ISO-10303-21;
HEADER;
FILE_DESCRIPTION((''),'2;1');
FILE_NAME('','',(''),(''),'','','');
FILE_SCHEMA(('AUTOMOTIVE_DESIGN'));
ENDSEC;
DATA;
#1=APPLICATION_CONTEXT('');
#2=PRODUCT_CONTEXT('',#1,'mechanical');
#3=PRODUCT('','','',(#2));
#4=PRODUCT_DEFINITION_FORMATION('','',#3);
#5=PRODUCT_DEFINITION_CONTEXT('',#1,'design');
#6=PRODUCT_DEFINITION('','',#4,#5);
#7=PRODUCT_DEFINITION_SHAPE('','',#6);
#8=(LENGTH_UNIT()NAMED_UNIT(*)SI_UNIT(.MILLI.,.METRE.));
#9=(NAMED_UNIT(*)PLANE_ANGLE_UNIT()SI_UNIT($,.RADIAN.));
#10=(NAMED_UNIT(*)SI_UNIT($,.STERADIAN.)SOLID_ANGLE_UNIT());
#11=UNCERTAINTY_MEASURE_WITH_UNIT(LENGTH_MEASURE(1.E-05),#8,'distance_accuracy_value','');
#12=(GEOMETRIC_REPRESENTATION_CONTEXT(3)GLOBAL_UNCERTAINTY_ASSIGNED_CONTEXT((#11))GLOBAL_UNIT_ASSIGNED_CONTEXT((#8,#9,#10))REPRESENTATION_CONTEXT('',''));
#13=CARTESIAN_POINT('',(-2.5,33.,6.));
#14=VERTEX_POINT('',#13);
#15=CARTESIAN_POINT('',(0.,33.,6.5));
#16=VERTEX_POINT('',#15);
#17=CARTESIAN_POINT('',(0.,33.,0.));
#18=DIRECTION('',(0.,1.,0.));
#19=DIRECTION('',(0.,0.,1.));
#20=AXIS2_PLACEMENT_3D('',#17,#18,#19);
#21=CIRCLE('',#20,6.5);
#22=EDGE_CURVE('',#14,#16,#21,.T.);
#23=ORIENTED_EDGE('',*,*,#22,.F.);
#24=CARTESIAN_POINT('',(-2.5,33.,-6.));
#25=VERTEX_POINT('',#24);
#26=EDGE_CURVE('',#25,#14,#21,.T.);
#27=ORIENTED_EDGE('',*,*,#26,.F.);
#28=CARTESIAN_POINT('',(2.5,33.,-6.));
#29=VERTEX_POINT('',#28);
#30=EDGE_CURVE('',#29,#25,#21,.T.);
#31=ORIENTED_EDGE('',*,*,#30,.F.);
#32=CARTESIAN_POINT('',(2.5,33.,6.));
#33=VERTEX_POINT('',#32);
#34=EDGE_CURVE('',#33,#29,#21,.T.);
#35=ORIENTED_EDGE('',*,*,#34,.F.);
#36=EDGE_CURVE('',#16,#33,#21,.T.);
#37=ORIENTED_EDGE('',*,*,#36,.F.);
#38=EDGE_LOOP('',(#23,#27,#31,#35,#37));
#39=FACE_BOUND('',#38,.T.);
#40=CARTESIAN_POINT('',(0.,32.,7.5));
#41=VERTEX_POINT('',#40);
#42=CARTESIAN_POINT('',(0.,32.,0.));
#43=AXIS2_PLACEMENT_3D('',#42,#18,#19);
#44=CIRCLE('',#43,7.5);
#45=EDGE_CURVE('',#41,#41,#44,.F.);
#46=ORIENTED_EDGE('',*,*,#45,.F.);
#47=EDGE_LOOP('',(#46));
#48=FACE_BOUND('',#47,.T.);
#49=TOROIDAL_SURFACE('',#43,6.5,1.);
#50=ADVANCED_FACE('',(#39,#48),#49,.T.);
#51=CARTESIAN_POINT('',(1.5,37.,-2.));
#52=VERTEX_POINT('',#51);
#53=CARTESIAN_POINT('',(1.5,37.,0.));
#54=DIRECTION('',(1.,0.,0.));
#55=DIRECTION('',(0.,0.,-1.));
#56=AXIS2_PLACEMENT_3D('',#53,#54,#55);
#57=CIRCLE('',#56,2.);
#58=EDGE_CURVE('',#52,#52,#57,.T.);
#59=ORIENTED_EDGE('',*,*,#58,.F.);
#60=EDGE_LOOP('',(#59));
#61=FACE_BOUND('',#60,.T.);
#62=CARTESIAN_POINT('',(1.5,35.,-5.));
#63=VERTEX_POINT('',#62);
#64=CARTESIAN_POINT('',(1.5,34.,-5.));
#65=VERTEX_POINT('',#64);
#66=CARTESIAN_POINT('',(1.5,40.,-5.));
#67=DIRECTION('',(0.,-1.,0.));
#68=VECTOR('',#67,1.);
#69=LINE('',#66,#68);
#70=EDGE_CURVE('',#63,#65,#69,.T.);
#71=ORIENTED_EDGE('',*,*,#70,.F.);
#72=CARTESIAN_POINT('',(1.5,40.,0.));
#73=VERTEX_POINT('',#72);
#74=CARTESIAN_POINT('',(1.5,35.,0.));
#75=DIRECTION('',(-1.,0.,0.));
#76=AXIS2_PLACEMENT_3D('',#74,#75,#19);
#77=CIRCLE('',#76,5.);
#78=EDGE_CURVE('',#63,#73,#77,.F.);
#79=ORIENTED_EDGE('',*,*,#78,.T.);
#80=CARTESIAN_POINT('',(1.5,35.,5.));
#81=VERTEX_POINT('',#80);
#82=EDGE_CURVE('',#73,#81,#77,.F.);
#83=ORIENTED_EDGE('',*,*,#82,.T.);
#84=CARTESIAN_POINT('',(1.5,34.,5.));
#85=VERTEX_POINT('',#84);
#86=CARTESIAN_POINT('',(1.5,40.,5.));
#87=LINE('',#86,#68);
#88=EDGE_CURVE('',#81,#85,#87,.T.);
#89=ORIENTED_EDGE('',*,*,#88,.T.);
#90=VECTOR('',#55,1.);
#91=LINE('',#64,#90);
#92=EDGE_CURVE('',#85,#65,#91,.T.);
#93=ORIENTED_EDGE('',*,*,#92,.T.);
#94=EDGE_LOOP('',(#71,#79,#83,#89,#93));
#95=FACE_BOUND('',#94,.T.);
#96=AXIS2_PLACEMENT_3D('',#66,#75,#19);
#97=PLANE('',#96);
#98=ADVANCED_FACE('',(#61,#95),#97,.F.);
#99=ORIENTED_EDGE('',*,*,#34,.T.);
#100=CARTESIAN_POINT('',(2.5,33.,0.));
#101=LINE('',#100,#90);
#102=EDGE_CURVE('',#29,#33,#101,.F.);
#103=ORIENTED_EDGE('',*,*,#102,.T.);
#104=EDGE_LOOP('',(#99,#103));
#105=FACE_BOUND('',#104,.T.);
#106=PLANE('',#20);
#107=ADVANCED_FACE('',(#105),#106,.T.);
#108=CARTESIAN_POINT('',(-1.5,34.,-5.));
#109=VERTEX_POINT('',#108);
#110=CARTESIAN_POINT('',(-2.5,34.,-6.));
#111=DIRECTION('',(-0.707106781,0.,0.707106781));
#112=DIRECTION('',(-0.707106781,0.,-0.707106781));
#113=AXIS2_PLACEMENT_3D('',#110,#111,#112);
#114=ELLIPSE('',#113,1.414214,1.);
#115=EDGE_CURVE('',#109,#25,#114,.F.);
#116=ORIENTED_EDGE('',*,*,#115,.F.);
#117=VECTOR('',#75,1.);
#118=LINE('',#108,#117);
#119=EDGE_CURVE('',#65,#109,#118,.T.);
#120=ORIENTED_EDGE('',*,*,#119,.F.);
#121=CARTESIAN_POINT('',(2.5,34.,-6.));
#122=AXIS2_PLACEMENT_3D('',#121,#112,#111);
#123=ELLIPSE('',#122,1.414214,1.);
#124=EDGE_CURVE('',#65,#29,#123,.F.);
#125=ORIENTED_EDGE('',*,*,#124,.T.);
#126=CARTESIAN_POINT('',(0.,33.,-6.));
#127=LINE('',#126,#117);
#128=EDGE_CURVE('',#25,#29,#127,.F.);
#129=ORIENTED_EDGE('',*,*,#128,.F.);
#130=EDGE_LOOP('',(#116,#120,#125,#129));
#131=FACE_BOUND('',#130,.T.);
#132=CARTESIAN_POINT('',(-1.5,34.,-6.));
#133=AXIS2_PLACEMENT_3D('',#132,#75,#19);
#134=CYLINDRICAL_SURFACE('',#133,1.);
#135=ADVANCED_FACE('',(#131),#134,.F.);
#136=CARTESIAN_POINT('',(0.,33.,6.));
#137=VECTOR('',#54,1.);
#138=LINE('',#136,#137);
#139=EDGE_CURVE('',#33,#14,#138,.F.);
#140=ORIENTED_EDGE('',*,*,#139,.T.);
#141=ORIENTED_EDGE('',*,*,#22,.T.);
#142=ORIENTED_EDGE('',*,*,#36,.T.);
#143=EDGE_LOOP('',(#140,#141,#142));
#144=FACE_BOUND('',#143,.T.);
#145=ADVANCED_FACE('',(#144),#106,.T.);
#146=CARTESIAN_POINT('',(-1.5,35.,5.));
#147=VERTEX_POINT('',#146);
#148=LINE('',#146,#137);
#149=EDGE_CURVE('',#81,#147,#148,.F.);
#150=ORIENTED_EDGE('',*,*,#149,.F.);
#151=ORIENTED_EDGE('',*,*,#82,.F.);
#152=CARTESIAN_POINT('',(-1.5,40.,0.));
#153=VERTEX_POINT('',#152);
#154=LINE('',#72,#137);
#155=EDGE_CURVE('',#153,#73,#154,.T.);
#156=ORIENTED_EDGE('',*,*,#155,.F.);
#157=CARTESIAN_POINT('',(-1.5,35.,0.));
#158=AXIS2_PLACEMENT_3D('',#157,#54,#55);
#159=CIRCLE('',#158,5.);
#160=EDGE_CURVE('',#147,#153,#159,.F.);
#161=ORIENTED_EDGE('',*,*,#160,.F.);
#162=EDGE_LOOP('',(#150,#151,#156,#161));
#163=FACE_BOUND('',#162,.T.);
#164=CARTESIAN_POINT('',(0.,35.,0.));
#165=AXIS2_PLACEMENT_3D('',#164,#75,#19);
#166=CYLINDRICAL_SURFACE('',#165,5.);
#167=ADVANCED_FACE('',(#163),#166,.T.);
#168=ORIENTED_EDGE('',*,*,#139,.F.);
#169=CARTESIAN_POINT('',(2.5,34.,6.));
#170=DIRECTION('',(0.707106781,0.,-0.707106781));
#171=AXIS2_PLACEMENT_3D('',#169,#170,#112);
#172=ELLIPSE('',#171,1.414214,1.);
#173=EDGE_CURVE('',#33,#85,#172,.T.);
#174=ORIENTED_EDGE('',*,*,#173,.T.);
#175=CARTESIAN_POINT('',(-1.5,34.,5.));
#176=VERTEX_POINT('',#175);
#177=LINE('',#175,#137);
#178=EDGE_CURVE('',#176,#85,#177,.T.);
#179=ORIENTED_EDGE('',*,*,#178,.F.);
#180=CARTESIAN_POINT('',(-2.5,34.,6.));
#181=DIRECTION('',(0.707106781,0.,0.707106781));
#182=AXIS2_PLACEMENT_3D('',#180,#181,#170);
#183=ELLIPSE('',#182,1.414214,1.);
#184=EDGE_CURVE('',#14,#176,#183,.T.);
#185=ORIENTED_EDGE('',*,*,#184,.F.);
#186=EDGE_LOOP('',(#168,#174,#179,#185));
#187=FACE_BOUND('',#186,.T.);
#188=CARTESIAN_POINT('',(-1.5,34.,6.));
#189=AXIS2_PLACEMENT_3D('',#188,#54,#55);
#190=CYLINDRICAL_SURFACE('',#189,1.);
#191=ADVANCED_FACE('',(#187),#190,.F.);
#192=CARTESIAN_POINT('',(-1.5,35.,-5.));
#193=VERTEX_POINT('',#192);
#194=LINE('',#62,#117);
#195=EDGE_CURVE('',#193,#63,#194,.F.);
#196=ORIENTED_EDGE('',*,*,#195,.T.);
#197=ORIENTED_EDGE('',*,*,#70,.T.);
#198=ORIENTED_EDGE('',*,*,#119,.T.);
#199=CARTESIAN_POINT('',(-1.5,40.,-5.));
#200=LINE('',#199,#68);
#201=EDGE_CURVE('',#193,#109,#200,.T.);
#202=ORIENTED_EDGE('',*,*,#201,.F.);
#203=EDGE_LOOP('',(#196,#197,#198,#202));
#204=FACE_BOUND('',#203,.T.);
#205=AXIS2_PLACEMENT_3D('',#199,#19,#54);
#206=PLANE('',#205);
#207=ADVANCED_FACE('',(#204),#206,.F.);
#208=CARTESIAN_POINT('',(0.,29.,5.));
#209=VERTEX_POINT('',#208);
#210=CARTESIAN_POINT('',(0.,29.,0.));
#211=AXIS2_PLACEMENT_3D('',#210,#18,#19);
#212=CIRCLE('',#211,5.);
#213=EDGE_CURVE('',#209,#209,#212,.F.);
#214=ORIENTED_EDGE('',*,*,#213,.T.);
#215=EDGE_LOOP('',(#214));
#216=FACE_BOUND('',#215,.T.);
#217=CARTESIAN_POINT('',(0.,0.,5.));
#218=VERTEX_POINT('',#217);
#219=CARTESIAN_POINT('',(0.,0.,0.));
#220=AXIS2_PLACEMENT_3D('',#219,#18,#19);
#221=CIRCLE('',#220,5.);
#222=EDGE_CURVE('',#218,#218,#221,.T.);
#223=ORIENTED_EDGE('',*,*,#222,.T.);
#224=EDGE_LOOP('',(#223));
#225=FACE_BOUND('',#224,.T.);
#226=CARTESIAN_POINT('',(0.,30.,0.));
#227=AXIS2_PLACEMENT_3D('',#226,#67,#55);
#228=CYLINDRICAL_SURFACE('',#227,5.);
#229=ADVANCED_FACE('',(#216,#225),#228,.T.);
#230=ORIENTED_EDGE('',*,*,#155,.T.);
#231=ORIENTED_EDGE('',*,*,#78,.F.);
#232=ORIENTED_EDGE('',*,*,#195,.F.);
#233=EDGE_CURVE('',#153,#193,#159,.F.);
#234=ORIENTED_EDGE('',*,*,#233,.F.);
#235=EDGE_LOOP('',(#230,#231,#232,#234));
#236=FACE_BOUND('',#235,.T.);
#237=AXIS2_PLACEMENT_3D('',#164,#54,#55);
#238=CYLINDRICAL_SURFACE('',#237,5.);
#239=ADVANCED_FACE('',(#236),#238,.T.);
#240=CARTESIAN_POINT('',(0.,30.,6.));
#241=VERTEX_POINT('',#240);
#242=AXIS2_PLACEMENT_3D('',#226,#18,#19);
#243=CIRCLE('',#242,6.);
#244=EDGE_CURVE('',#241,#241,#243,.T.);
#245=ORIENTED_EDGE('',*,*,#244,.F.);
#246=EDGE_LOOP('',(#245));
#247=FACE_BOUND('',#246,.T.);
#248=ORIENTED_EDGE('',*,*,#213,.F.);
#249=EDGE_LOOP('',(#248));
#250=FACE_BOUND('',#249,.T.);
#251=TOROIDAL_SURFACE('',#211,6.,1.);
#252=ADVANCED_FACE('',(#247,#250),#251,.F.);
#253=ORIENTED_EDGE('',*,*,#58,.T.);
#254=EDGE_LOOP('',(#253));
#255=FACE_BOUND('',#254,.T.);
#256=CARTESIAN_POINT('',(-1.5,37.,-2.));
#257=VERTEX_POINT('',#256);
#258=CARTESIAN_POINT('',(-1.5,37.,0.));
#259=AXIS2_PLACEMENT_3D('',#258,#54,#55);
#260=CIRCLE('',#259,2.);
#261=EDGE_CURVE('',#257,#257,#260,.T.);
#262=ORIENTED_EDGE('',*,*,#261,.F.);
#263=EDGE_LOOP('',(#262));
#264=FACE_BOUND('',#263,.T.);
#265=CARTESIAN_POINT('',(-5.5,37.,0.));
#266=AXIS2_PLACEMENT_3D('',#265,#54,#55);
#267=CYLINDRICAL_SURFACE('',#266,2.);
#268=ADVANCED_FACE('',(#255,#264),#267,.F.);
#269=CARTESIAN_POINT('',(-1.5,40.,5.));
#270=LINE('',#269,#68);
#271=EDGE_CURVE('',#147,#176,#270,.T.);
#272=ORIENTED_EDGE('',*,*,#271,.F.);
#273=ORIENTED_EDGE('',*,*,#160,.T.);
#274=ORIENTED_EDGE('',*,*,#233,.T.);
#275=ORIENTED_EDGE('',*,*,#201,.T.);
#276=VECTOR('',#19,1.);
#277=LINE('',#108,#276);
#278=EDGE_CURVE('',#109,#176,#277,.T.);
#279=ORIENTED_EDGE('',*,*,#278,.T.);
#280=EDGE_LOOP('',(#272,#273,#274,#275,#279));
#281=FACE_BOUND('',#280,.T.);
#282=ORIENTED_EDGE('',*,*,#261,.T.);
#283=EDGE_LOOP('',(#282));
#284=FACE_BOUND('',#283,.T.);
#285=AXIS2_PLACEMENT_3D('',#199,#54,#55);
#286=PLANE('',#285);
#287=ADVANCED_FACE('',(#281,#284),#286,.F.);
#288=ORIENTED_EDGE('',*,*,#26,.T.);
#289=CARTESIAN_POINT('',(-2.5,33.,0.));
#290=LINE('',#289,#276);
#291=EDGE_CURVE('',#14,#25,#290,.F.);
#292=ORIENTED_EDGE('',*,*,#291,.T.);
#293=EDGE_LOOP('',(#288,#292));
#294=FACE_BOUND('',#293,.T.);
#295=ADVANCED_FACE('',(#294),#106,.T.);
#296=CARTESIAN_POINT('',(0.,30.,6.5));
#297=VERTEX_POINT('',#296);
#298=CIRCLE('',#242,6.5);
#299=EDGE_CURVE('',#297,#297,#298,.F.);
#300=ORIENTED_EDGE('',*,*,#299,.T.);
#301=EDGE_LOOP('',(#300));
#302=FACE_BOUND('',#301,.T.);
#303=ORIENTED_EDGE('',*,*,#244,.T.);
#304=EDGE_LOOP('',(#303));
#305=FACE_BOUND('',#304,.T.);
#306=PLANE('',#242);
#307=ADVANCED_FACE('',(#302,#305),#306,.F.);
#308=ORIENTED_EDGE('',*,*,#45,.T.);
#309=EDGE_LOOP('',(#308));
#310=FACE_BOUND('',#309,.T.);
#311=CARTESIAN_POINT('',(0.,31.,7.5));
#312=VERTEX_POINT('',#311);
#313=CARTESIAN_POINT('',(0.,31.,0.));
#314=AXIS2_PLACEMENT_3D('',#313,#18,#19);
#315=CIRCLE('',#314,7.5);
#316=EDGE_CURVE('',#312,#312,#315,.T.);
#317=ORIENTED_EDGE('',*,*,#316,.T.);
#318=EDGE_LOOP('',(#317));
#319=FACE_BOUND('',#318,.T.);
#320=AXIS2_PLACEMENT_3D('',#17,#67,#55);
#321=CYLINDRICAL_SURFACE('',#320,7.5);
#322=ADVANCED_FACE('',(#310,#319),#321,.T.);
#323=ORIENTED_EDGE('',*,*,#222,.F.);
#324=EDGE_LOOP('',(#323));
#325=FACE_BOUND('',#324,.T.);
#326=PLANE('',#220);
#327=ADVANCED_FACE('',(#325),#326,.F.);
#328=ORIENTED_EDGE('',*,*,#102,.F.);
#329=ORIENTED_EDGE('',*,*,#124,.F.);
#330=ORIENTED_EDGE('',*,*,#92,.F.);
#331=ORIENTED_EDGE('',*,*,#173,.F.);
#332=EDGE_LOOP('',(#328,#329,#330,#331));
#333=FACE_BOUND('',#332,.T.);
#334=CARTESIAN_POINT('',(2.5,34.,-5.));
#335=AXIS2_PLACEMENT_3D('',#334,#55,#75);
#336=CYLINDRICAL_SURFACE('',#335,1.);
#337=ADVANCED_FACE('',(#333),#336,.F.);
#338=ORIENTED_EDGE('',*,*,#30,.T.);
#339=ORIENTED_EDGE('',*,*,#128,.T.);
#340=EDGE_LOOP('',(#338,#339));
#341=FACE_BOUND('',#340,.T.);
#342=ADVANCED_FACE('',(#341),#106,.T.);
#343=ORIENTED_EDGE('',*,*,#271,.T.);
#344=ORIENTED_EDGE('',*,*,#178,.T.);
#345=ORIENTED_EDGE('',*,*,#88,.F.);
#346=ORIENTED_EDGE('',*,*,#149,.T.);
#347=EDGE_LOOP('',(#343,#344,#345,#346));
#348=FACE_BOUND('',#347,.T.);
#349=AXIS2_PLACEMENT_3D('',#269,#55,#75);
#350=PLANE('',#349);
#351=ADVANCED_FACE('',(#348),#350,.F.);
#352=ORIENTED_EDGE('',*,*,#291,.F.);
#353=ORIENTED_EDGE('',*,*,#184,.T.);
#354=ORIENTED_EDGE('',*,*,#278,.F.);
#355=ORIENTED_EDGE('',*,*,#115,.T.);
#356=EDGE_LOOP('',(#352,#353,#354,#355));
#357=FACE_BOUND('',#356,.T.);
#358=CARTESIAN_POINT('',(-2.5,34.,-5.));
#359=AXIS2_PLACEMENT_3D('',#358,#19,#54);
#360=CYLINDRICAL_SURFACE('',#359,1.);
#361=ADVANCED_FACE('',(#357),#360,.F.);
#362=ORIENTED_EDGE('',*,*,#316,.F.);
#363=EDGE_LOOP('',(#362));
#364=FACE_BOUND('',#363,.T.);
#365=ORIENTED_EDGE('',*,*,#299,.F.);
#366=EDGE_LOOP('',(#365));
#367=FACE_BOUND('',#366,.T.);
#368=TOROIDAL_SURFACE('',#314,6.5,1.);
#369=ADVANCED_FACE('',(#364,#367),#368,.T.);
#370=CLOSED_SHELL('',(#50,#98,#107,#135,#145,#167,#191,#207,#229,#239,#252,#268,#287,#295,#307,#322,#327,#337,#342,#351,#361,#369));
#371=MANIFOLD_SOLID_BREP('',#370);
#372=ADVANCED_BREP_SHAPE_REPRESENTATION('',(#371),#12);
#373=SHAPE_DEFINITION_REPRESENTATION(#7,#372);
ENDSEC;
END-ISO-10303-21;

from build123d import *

# Parameters (mm, degrees)
SKETCH1_R           = 5
BOSS_EXTRUDE1_DEPTH = 30
SKETCH4_R           = 7.5
BOSS_EXTRUDE3_DEPTH = 3
SKETCH5_W           = 3
SKETCH5_H           = 10
BOSS_EXTRUDE4_DEPTH = 7
SKETCH6_R           = 2
CUT_EXTRUDE2_DEPTH  = 7
FILLET1_R           = 1
FILLET2_R           = 5


with BuildPart() as part:
    # Sketch1 → Boss-Extrude1 (new body)
    with BuildSketch(Plane(origin=(0, 0, 0), x_dir=(1, 0, 0), z_dir=(0, 1, 0))):
        with Locations(Location((0, 0, 0), (0, 0, 270))):
            Circle(SKETCH1_R)
    extrude(amount=BOSS_EXTRUDE1_DEPTH)

    # Sketch4 → Boss-Extrude3 (add)
    with BuildSketch(Plane(origin=(0, 30, 0), x_dir=(1, 0, 0), z_dir=(0, 1, 0))):
        with Locations(Location((0, 0, 0), (0, 0, 270))):
            Circle(SKETCH4_R)
    extrude(amount=BOSS_EXTRUDE3_DEPTH)

    # Sketch5 → Boss-Extrude4 (add)
    with BuildSketch(Plane(origin=(0, 33, 0), x_dir=(1, 0, 0), z_dir=(0, 1, 0))):
        Rectangle(SKETCH5_W, SKETCH5_H)
    extrude(amount=BOSS_EXTRUDE4_DEPTH)

    # Sketch6 → Cut-Extrude2 (cut)
    with BuildSketch(Plane(origin=(1.5, 0, 0), x_dir=(0, 0, -1), z_dir=(1, 0, 0))):
        with Locations((0, 37)):
            Circle(SKETCH6_R)
    extrude(amount=-CUT_EXTRUDE2_DEPTH, mode=Mode.SUBTRACT)

    # Fillet1
    fillet1_edges = [part.edges().sort_by_distance(p)[0] for p in [
        (1.5, 33, 0),
        (0, 33, -5),
        (-1.5, 33, 0),
        (0, 33, 5),
        (0, 30, -5),
        (0, 30, -7.5),
        (0, 33, -7.5),
    ]]
    fillet(fillet1_edges, radius=FILLET1_R - 0.0001)  # a hair under: the kernel refuses the full size

    # Fillet2
    fillet2_edges = [part.edges().sort_by_distance(p)[0] for p in [
        (0, 40, -5),
        (0, 40, 5),
    ]]
    fillet(fillet2_edges, radius=FILLET2_R - 0.0001)  # a hair under: the kernel refuses the full size


solid = part.part
